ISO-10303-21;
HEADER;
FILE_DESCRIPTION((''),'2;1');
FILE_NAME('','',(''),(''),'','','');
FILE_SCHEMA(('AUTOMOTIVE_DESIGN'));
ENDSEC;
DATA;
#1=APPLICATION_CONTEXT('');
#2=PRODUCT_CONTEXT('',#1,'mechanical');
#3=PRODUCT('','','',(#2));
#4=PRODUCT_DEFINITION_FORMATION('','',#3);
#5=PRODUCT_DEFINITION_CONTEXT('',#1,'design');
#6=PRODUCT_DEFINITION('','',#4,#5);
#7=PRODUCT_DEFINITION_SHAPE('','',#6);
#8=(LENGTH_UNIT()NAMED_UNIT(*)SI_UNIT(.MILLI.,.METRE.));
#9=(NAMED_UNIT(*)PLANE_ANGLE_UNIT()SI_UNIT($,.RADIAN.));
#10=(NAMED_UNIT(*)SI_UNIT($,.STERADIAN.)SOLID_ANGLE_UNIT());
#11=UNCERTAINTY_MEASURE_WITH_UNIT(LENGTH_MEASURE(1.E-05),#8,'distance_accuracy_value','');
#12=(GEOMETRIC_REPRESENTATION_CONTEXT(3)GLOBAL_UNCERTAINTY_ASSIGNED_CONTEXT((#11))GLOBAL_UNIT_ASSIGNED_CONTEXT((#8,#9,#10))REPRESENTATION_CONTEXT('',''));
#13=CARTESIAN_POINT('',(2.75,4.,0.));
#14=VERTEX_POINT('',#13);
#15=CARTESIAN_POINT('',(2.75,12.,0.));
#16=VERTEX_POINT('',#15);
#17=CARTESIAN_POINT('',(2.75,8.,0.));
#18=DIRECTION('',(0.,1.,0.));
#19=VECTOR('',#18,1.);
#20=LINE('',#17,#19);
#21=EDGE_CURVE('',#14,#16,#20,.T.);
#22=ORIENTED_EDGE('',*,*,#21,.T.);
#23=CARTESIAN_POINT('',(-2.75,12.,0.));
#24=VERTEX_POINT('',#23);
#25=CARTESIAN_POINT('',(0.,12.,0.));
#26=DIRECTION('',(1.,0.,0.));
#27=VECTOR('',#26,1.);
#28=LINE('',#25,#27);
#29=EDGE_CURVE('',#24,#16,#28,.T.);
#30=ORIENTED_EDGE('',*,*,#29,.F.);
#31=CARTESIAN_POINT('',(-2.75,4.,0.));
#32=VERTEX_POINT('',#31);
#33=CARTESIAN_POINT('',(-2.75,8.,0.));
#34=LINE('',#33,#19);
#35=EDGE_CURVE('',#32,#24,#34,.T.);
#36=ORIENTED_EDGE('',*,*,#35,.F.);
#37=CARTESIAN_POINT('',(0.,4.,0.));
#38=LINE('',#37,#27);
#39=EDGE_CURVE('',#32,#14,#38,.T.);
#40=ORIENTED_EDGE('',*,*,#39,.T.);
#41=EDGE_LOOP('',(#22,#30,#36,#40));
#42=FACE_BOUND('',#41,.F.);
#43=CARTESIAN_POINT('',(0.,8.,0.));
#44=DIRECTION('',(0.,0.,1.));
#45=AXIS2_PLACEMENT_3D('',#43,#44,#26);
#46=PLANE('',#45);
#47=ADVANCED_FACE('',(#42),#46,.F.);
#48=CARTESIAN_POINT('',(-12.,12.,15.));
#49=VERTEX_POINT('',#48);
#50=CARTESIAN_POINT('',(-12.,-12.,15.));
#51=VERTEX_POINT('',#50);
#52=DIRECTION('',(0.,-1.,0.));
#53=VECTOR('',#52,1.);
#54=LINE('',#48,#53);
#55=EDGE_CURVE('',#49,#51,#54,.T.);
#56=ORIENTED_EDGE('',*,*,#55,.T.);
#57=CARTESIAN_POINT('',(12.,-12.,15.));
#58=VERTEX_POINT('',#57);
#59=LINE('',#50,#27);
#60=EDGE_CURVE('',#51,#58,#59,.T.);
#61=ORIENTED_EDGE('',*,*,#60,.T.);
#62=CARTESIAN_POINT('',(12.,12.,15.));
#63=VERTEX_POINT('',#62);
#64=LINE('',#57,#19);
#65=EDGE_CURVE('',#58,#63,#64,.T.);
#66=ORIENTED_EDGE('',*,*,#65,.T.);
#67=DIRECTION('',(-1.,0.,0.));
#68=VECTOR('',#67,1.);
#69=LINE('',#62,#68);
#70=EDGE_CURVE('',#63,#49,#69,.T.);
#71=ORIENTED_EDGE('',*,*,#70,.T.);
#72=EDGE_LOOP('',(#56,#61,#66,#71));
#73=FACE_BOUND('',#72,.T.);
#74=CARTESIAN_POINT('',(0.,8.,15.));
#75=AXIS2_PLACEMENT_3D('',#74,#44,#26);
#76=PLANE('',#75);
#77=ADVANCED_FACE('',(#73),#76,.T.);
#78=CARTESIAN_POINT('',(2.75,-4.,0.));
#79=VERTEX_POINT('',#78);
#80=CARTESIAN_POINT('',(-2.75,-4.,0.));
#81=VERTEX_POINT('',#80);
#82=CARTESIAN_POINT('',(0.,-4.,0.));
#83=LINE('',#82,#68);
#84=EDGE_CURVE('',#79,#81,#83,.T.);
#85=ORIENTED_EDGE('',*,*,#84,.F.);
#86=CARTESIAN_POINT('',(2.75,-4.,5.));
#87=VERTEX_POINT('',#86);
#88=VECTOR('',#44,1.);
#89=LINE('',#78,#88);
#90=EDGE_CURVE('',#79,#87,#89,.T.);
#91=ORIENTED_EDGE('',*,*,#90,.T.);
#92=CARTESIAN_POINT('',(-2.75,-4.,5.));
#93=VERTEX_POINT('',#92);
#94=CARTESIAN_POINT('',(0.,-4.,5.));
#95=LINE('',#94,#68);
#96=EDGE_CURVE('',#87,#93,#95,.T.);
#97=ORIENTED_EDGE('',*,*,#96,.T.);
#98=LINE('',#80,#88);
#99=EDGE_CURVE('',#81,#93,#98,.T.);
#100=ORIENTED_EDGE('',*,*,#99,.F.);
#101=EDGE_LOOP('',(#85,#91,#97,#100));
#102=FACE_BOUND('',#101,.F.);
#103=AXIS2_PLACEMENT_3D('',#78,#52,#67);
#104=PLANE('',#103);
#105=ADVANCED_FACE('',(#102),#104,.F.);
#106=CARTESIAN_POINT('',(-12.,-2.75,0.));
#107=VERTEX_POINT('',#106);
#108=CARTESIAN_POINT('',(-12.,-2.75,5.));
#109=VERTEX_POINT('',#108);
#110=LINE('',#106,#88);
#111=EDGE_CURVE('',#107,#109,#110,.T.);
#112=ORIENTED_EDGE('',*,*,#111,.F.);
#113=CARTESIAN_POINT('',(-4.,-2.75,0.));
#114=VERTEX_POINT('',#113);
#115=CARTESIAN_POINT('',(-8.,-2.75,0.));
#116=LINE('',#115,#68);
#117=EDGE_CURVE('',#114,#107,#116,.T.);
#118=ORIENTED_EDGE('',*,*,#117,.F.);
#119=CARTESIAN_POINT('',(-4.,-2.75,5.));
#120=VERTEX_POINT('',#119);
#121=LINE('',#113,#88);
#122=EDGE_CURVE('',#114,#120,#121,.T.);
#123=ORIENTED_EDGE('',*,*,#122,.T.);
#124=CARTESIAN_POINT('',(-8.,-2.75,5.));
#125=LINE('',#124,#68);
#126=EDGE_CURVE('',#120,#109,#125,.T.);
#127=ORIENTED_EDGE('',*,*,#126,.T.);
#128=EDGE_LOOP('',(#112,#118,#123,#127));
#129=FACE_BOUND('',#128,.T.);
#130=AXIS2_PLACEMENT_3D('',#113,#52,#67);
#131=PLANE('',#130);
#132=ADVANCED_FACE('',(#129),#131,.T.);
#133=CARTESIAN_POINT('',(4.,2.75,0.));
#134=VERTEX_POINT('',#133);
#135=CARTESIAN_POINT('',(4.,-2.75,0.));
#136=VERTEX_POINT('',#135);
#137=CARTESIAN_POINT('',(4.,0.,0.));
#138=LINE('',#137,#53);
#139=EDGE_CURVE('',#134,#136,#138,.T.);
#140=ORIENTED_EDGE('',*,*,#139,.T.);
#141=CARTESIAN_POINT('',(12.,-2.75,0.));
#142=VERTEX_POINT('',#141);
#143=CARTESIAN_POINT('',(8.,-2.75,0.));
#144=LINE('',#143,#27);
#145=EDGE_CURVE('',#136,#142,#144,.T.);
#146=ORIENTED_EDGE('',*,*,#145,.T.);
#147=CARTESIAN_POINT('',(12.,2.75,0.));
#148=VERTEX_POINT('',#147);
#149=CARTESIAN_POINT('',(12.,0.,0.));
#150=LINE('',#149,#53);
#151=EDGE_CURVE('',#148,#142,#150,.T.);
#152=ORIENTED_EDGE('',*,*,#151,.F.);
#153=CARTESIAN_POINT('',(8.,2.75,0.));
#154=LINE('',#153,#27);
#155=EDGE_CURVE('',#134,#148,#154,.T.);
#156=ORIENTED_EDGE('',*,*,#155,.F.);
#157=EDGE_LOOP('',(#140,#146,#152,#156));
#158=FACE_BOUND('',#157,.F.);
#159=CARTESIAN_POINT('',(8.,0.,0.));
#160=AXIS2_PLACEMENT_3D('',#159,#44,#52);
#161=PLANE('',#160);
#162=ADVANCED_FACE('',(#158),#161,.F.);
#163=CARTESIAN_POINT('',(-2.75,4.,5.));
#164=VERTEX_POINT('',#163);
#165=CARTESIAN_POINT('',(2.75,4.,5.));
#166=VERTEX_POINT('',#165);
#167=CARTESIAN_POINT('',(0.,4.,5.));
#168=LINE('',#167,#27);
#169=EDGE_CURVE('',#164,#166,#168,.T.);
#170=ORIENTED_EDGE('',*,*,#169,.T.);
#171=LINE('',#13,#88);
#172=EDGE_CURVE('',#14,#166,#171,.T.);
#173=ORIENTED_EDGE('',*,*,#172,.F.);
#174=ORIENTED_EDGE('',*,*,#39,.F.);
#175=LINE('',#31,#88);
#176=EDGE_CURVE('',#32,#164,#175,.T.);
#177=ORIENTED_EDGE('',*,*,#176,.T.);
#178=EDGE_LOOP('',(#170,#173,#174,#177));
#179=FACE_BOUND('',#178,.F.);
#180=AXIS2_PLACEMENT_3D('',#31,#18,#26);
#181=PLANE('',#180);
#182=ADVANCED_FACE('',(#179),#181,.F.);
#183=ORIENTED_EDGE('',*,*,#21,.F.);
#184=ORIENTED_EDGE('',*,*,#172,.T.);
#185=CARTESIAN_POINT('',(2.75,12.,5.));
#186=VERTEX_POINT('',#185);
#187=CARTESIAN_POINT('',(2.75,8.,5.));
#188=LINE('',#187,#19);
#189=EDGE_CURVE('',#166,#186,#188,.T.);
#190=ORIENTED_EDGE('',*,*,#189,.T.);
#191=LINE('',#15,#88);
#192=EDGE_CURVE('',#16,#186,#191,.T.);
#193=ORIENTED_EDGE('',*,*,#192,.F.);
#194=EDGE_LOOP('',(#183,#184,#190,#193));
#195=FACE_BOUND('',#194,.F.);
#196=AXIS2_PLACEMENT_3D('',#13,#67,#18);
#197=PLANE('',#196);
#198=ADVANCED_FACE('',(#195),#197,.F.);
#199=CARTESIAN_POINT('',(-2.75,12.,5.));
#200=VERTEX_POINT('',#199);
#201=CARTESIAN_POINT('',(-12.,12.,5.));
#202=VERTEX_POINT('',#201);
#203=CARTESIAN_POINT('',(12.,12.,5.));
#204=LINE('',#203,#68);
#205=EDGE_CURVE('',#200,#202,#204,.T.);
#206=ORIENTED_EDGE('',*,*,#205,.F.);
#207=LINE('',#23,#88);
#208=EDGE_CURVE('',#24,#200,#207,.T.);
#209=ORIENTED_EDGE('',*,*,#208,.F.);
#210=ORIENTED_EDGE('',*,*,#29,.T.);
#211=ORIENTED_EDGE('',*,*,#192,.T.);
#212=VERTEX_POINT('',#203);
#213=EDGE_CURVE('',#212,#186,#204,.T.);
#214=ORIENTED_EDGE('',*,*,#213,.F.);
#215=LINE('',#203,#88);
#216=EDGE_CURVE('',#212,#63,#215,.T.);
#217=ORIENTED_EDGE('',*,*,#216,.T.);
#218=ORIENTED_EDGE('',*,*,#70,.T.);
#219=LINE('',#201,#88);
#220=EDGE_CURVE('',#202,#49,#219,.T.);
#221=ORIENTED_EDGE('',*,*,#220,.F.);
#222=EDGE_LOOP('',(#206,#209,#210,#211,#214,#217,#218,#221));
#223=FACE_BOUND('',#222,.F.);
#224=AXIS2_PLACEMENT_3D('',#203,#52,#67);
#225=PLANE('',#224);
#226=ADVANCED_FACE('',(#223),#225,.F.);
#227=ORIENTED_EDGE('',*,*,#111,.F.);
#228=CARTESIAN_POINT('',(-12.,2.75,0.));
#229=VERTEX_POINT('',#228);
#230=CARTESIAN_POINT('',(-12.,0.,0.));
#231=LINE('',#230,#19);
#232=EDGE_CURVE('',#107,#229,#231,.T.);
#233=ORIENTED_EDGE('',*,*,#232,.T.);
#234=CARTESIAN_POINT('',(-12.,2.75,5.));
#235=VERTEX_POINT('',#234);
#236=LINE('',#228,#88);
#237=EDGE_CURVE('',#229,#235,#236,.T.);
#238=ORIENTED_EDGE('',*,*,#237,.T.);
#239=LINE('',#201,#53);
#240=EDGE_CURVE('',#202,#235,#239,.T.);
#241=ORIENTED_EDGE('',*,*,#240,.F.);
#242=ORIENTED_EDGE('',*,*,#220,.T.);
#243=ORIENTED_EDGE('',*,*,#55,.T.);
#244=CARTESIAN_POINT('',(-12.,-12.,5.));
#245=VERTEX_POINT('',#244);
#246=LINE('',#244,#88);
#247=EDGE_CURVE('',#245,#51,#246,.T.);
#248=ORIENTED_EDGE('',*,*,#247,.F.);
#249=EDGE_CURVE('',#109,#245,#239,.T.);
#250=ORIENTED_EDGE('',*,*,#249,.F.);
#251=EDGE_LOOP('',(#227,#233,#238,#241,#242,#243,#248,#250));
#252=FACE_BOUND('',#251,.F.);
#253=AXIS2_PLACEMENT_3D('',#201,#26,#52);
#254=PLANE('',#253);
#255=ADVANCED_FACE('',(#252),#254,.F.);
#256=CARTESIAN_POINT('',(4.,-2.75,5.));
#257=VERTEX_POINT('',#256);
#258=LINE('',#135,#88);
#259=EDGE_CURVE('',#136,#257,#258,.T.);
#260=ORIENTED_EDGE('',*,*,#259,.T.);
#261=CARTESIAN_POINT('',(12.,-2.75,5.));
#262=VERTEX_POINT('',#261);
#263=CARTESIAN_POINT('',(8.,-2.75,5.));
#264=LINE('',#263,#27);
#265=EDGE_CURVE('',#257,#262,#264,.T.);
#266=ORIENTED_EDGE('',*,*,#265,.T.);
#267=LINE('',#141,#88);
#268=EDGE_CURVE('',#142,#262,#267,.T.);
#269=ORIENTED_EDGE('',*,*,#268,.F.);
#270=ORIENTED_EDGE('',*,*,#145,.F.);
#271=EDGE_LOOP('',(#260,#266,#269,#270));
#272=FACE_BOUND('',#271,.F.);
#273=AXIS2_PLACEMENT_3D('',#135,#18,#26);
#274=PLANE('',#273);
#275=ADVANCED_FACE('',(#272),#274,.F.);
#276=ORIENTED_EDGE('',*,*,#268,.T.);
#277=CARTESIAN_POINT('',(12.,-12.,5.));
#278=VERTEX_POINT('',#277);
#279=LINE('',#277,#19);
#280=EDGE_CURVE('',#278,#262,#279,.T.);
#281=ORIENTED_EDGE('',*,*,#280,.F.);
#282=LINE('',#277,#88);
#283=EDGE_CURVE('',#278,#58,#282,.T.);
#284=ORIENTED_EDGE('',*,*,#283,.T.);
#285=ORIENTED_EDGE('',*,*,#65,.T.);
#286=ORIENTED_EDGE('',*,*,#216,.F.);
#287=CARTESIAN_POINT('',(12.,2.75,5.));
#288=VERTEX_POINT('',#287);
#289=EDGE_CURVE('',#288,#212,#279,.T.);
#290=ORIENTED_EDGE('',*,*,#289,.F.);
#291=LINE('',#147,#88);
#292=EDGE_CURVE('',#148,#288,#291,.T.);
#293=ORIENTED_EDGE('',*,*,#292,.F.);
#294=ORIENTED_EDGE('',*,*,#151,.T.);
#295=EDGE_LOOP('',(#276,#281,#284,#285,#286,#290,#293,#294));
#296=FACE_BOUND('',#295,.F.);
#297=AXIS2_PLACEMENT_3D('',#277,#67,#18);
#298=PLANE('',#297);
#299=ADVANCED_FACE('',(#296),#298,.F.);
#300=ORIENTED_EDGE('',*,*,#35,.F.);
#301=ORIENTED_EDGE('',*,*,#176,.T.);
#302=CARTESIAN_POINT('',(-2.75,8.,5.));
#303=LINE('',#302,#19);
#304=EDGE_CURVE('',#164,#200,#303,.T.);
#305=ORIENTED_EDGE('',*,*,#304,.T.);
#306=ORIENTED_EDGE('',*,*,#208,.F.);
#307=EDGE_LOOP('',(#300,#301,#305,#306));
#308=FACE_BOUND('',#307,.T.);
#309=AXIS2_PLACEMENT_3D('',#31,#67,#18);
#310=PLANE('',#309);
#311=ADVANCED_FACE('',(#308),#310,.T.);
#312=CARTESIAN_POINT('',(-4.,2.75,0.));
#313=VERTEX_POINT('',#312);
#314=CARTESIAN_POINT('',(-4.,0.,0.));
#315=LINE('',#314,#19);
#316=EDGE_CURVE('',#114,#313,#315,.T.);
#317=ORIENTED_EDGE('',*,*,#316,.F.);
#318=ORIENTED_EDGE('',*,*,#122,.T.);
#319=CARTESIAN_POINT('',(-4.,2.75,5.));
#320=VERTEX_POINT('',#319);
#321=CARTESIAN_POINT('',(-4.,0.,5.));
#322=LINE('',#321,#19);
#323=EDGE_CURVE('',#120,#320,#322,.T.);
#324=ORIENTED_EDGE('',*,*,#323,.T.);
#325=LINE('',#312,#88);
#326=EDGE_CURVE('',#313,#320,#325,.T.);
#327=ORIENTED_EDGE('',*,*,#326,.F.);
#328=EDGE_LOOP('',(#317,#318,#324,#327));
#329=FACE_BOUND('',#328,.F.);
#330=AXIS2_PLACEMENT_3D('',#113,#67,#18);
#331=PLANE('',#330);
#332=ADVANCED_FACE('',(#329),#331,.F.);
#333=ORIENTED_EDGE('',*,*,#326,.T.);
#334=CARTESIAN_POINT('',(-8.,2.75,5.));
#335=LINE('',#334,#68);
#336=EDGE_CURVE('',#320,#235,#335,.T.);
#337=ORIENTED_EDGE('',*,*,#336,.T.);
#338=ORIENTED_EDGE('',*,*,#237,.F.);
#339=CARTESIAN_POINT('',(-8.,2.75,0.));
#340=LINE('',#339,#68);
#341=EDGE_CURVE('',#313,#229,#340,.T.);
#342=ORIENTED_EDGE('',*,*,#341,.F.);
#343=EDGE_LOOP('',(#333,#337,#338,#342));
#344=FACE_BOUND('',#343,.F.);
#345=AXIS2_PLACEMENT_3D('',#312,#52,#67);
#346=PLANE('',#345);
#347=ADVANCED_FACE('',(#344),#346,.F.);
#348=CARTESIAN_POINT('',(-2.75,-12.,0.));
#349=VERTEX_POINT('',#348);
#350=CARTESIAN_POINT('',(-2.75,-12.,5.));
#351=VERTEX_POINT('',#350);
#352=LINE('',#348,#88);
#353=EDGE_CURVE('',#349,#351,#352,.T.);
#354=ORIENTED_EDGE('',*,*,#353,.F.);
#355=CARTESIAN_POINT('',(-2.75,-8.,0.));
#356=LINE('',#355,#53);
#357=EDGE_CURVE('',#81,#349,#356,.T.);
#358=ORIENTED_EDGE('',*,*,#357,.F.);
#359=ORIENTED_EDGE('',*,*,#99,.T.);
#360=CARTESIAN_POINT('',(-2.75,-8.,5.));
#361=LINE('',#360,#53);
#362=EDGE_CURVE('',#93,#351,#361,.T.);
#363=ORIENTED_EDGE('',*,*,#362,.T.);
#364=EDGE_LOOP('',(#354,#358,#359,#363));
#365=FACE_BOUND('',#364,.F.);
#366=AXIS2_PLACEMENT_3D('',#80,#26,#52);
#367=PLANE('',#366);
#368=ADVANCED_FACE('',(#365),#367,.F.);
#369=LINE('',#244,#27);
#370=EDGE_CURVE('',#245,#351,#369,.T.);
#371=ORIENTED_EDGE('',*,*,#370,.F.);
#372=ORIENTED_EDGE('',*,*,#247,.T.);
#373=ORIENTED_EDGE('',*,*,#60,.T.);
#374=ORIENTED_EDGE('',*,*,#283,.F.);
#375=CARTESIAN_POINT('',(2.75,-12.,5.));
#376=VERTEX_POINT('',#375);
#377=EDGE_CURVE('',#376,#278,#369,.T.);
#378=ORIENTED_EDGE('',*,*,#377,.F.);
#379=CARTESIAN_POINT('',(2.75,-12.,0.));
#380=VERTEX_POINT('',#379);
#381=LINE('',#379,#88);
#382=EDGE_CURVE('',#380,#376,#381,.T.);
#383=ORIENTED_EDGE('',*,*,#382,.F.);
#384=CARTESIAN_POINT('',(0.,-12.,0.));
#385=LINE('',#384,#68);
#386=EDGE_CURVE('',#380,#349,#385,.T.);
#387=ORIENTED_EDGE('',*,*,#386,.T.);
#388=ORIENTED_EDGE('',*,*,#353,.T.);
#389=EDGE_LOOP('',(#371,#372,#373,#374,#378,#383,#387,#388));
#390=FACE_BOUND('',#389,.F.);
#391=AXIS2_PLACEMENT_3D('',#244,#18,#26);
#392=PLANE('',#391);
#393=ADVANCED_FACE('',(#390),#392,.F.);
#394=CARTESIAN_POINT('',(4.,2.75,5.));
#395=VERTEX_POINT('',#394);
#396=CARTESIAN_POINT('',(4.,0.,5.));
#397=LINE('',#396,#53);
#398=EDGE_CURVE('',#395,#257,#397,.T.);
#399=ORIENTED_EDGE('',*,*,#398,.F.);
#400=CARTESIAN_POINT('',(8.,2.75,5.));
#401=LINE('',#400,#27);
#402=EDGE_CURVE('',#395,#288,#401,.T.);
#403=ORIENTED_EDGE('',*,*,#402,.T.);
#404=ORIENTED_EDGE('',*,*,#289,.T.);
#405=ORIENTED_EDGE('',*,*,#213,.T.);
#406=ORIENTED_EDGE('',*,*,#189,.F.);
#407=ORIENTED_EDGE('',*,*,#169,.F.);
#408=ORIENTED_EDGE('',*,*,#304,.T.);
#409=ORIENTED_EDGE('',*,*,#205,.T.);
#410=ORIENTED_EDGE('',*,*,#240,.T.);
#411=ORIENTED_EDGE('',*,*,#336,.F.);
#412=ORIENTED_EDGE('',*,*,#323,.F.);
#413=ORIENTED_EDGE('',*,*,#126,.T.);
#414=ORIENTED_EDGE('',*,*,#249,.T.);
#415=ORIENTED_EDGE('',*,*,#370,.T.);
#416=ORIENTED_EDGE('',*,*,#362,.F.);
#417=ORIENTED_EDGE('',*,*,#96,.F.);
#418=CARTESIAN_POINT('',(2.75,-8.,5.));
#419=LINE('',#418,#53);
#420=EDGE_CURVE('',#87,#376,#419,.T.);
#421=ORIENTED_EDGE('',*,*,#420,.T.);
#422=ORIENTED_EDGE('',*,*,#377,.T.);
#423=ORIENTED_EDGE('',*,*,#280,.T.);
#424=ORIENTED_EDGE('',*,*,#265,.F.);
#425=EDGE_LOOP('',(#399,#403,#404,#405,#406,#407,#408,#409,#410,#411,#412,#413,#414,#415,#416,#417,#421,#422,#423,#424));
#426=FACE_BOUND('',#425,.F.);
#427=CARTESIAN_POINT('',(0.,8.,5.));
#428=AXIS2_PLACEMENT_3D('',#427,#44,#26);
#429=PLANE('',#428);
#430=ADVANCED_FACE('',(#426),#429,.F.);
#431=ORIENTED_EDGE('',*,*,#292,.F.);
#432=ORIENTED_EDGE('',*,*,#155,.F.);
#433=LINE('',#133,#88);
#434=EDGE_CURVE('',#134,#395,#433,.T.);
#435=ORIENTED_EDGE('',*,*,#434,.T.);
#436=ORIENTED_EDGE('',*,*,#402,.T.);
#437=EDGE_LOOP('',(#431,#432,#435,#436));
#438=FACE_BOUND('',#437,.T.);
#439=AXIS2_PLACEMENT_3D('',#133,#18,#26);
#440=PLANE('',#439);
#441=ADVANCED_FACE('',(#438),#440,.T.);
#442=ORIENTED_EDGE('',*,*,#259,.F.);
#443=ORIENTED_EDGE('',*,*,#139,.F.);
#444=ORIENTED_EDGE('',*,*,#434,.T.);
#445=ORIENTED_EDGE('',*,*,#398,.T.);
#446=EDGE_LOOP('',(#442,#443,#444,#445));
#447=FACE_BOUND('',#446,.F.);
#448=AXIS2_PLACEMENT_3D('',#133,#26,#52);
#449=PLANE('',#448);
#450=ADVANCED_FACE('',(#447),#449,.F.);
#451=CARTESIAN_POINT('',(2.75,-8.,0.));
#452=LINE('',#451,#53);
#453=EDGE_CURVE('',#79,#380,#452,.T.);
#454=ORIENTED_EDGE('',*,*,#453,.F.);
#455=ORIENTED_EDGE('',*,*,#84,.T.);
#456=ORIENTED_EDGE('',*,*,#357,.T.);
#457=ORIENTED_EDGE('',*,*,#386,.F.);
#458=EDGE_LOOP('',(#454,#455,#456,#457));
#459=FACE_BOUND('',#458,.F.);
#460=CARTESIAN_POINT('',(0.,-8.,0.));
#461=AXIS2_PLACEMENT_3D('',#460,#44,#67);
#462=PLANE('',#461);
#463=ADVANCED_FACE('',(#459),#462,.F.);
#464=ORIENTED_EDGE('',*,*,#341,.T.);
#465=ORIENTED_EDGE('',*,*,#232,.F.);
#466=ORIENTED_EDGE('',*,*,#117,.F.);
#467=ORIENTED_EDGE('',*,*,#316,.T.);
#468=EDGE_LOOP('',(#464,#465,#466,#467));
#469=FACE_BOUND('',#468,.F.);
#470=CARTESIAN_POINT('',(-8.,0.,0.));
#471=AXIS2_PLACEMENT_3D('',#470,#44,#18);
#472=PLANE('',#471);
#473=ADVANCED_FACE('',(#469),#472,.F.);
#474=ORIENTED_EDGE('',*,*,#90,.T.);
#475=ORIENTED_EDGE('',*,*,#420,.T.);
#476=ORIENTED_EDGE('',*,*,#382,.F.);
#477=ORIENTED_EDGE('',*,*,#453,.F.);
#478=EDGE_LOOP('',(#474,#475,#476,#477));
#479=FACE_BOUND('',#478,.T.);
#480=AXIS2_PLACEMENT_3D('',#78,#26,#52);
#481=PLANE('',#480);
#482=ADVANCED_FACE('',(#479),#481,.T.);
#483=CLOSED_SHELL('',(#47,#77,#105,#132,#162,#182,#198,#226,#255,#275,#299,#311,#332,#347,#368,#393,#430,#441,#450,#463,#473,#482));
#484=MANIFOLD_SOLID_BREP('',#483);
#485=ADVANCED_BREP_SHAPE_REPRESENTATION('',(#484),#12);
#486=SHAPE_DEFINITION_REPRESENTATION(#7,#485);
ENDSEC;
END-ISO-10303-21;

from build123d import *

# Parameters (mm, degrees)
F0_W     = 5.5
F0_H     = 8
F1_DEPTH = 5
F0_R     = 1
F2_COUNT = 4
F4_W     = 5.5
F4_H     = 8
F4_W_2   = 8
F4_H_2   = 5.5
F5_DEPTH = 10


with BuildPart() as f1:
    # F0 (on Top) → F1 (new body)
    with BuildSketch(Plane.XY):
        with Locations((0, 8)):
            Rectangle(F0_W, F0_H)
    extrude(amount=F1_DEPTH)


with BuildPart() as f1b:
    # F0 (on Top) → F1, piece 2 (new body)
    with BuildSketch(Plane.XY):
        Circle(F0_R)
    extrude(amount=F1_DEPTH)


with BuildPart() as f2_1:
    # F2: instance of F1
    add(f1.part.rotate(Axis((0, 0, 0), (0, 0, -1)), 1 * 360 / F2_COUNT))


with BuildPart() as f2_2:
    # F2: instance of F1
    add(f1.part.rotate(Axis((0, 0, 0), (0, 0, -1)), 2 * 360 / F2_COUNT))


with BuildPart() as f2_3:
    # F2: instance of F1
    add(f1.part.rotate(Axis((0, 0, 0), (0, 0, -1)), 3 * 360 / F2_COUNT))


with BuildPart() as f1_1:
    add(f1.part)

    add(f2_1.part)  # F5 merges F2_1

    add(f2_2.part)  # F5 merges F2_2

    add(f2_3.part)  # F5 merges F2_3
    # F4 (on face) → F5 (join)
    with BuildSketch(Plane.XY.offset(5)):
        with Locations((0, 8)):
            Rectangle(F4_W, F4_H)
        Polygon((12, 12), (2.75, 12), (2.75, 4), (-2.75, 4), (-2.75, 12), (-12, 12), (-12, 2.75), (-4, 2.75), (-4, -2.75), (-12, -2.75), (-12, -12), (-2.75, -12), (-2.75, -4), (2.75, -4), (2.75, -12), (12, -12), (12, -2.75), (4, -2.75), (4, 2.75), (12, 2.75), align=None)
        with Locations((8, 0)):
            Rectangle(F4_W_2, F4_H_2)
        with Locations((-8, 0)):
            Rectangle(F4_W_2, F4_H_2)
        with Locations((0, -8)):
            Rectangle(F4_W, F4_H)
    extrude(amount=F5_DEPTH)


solid = f1_1.part
